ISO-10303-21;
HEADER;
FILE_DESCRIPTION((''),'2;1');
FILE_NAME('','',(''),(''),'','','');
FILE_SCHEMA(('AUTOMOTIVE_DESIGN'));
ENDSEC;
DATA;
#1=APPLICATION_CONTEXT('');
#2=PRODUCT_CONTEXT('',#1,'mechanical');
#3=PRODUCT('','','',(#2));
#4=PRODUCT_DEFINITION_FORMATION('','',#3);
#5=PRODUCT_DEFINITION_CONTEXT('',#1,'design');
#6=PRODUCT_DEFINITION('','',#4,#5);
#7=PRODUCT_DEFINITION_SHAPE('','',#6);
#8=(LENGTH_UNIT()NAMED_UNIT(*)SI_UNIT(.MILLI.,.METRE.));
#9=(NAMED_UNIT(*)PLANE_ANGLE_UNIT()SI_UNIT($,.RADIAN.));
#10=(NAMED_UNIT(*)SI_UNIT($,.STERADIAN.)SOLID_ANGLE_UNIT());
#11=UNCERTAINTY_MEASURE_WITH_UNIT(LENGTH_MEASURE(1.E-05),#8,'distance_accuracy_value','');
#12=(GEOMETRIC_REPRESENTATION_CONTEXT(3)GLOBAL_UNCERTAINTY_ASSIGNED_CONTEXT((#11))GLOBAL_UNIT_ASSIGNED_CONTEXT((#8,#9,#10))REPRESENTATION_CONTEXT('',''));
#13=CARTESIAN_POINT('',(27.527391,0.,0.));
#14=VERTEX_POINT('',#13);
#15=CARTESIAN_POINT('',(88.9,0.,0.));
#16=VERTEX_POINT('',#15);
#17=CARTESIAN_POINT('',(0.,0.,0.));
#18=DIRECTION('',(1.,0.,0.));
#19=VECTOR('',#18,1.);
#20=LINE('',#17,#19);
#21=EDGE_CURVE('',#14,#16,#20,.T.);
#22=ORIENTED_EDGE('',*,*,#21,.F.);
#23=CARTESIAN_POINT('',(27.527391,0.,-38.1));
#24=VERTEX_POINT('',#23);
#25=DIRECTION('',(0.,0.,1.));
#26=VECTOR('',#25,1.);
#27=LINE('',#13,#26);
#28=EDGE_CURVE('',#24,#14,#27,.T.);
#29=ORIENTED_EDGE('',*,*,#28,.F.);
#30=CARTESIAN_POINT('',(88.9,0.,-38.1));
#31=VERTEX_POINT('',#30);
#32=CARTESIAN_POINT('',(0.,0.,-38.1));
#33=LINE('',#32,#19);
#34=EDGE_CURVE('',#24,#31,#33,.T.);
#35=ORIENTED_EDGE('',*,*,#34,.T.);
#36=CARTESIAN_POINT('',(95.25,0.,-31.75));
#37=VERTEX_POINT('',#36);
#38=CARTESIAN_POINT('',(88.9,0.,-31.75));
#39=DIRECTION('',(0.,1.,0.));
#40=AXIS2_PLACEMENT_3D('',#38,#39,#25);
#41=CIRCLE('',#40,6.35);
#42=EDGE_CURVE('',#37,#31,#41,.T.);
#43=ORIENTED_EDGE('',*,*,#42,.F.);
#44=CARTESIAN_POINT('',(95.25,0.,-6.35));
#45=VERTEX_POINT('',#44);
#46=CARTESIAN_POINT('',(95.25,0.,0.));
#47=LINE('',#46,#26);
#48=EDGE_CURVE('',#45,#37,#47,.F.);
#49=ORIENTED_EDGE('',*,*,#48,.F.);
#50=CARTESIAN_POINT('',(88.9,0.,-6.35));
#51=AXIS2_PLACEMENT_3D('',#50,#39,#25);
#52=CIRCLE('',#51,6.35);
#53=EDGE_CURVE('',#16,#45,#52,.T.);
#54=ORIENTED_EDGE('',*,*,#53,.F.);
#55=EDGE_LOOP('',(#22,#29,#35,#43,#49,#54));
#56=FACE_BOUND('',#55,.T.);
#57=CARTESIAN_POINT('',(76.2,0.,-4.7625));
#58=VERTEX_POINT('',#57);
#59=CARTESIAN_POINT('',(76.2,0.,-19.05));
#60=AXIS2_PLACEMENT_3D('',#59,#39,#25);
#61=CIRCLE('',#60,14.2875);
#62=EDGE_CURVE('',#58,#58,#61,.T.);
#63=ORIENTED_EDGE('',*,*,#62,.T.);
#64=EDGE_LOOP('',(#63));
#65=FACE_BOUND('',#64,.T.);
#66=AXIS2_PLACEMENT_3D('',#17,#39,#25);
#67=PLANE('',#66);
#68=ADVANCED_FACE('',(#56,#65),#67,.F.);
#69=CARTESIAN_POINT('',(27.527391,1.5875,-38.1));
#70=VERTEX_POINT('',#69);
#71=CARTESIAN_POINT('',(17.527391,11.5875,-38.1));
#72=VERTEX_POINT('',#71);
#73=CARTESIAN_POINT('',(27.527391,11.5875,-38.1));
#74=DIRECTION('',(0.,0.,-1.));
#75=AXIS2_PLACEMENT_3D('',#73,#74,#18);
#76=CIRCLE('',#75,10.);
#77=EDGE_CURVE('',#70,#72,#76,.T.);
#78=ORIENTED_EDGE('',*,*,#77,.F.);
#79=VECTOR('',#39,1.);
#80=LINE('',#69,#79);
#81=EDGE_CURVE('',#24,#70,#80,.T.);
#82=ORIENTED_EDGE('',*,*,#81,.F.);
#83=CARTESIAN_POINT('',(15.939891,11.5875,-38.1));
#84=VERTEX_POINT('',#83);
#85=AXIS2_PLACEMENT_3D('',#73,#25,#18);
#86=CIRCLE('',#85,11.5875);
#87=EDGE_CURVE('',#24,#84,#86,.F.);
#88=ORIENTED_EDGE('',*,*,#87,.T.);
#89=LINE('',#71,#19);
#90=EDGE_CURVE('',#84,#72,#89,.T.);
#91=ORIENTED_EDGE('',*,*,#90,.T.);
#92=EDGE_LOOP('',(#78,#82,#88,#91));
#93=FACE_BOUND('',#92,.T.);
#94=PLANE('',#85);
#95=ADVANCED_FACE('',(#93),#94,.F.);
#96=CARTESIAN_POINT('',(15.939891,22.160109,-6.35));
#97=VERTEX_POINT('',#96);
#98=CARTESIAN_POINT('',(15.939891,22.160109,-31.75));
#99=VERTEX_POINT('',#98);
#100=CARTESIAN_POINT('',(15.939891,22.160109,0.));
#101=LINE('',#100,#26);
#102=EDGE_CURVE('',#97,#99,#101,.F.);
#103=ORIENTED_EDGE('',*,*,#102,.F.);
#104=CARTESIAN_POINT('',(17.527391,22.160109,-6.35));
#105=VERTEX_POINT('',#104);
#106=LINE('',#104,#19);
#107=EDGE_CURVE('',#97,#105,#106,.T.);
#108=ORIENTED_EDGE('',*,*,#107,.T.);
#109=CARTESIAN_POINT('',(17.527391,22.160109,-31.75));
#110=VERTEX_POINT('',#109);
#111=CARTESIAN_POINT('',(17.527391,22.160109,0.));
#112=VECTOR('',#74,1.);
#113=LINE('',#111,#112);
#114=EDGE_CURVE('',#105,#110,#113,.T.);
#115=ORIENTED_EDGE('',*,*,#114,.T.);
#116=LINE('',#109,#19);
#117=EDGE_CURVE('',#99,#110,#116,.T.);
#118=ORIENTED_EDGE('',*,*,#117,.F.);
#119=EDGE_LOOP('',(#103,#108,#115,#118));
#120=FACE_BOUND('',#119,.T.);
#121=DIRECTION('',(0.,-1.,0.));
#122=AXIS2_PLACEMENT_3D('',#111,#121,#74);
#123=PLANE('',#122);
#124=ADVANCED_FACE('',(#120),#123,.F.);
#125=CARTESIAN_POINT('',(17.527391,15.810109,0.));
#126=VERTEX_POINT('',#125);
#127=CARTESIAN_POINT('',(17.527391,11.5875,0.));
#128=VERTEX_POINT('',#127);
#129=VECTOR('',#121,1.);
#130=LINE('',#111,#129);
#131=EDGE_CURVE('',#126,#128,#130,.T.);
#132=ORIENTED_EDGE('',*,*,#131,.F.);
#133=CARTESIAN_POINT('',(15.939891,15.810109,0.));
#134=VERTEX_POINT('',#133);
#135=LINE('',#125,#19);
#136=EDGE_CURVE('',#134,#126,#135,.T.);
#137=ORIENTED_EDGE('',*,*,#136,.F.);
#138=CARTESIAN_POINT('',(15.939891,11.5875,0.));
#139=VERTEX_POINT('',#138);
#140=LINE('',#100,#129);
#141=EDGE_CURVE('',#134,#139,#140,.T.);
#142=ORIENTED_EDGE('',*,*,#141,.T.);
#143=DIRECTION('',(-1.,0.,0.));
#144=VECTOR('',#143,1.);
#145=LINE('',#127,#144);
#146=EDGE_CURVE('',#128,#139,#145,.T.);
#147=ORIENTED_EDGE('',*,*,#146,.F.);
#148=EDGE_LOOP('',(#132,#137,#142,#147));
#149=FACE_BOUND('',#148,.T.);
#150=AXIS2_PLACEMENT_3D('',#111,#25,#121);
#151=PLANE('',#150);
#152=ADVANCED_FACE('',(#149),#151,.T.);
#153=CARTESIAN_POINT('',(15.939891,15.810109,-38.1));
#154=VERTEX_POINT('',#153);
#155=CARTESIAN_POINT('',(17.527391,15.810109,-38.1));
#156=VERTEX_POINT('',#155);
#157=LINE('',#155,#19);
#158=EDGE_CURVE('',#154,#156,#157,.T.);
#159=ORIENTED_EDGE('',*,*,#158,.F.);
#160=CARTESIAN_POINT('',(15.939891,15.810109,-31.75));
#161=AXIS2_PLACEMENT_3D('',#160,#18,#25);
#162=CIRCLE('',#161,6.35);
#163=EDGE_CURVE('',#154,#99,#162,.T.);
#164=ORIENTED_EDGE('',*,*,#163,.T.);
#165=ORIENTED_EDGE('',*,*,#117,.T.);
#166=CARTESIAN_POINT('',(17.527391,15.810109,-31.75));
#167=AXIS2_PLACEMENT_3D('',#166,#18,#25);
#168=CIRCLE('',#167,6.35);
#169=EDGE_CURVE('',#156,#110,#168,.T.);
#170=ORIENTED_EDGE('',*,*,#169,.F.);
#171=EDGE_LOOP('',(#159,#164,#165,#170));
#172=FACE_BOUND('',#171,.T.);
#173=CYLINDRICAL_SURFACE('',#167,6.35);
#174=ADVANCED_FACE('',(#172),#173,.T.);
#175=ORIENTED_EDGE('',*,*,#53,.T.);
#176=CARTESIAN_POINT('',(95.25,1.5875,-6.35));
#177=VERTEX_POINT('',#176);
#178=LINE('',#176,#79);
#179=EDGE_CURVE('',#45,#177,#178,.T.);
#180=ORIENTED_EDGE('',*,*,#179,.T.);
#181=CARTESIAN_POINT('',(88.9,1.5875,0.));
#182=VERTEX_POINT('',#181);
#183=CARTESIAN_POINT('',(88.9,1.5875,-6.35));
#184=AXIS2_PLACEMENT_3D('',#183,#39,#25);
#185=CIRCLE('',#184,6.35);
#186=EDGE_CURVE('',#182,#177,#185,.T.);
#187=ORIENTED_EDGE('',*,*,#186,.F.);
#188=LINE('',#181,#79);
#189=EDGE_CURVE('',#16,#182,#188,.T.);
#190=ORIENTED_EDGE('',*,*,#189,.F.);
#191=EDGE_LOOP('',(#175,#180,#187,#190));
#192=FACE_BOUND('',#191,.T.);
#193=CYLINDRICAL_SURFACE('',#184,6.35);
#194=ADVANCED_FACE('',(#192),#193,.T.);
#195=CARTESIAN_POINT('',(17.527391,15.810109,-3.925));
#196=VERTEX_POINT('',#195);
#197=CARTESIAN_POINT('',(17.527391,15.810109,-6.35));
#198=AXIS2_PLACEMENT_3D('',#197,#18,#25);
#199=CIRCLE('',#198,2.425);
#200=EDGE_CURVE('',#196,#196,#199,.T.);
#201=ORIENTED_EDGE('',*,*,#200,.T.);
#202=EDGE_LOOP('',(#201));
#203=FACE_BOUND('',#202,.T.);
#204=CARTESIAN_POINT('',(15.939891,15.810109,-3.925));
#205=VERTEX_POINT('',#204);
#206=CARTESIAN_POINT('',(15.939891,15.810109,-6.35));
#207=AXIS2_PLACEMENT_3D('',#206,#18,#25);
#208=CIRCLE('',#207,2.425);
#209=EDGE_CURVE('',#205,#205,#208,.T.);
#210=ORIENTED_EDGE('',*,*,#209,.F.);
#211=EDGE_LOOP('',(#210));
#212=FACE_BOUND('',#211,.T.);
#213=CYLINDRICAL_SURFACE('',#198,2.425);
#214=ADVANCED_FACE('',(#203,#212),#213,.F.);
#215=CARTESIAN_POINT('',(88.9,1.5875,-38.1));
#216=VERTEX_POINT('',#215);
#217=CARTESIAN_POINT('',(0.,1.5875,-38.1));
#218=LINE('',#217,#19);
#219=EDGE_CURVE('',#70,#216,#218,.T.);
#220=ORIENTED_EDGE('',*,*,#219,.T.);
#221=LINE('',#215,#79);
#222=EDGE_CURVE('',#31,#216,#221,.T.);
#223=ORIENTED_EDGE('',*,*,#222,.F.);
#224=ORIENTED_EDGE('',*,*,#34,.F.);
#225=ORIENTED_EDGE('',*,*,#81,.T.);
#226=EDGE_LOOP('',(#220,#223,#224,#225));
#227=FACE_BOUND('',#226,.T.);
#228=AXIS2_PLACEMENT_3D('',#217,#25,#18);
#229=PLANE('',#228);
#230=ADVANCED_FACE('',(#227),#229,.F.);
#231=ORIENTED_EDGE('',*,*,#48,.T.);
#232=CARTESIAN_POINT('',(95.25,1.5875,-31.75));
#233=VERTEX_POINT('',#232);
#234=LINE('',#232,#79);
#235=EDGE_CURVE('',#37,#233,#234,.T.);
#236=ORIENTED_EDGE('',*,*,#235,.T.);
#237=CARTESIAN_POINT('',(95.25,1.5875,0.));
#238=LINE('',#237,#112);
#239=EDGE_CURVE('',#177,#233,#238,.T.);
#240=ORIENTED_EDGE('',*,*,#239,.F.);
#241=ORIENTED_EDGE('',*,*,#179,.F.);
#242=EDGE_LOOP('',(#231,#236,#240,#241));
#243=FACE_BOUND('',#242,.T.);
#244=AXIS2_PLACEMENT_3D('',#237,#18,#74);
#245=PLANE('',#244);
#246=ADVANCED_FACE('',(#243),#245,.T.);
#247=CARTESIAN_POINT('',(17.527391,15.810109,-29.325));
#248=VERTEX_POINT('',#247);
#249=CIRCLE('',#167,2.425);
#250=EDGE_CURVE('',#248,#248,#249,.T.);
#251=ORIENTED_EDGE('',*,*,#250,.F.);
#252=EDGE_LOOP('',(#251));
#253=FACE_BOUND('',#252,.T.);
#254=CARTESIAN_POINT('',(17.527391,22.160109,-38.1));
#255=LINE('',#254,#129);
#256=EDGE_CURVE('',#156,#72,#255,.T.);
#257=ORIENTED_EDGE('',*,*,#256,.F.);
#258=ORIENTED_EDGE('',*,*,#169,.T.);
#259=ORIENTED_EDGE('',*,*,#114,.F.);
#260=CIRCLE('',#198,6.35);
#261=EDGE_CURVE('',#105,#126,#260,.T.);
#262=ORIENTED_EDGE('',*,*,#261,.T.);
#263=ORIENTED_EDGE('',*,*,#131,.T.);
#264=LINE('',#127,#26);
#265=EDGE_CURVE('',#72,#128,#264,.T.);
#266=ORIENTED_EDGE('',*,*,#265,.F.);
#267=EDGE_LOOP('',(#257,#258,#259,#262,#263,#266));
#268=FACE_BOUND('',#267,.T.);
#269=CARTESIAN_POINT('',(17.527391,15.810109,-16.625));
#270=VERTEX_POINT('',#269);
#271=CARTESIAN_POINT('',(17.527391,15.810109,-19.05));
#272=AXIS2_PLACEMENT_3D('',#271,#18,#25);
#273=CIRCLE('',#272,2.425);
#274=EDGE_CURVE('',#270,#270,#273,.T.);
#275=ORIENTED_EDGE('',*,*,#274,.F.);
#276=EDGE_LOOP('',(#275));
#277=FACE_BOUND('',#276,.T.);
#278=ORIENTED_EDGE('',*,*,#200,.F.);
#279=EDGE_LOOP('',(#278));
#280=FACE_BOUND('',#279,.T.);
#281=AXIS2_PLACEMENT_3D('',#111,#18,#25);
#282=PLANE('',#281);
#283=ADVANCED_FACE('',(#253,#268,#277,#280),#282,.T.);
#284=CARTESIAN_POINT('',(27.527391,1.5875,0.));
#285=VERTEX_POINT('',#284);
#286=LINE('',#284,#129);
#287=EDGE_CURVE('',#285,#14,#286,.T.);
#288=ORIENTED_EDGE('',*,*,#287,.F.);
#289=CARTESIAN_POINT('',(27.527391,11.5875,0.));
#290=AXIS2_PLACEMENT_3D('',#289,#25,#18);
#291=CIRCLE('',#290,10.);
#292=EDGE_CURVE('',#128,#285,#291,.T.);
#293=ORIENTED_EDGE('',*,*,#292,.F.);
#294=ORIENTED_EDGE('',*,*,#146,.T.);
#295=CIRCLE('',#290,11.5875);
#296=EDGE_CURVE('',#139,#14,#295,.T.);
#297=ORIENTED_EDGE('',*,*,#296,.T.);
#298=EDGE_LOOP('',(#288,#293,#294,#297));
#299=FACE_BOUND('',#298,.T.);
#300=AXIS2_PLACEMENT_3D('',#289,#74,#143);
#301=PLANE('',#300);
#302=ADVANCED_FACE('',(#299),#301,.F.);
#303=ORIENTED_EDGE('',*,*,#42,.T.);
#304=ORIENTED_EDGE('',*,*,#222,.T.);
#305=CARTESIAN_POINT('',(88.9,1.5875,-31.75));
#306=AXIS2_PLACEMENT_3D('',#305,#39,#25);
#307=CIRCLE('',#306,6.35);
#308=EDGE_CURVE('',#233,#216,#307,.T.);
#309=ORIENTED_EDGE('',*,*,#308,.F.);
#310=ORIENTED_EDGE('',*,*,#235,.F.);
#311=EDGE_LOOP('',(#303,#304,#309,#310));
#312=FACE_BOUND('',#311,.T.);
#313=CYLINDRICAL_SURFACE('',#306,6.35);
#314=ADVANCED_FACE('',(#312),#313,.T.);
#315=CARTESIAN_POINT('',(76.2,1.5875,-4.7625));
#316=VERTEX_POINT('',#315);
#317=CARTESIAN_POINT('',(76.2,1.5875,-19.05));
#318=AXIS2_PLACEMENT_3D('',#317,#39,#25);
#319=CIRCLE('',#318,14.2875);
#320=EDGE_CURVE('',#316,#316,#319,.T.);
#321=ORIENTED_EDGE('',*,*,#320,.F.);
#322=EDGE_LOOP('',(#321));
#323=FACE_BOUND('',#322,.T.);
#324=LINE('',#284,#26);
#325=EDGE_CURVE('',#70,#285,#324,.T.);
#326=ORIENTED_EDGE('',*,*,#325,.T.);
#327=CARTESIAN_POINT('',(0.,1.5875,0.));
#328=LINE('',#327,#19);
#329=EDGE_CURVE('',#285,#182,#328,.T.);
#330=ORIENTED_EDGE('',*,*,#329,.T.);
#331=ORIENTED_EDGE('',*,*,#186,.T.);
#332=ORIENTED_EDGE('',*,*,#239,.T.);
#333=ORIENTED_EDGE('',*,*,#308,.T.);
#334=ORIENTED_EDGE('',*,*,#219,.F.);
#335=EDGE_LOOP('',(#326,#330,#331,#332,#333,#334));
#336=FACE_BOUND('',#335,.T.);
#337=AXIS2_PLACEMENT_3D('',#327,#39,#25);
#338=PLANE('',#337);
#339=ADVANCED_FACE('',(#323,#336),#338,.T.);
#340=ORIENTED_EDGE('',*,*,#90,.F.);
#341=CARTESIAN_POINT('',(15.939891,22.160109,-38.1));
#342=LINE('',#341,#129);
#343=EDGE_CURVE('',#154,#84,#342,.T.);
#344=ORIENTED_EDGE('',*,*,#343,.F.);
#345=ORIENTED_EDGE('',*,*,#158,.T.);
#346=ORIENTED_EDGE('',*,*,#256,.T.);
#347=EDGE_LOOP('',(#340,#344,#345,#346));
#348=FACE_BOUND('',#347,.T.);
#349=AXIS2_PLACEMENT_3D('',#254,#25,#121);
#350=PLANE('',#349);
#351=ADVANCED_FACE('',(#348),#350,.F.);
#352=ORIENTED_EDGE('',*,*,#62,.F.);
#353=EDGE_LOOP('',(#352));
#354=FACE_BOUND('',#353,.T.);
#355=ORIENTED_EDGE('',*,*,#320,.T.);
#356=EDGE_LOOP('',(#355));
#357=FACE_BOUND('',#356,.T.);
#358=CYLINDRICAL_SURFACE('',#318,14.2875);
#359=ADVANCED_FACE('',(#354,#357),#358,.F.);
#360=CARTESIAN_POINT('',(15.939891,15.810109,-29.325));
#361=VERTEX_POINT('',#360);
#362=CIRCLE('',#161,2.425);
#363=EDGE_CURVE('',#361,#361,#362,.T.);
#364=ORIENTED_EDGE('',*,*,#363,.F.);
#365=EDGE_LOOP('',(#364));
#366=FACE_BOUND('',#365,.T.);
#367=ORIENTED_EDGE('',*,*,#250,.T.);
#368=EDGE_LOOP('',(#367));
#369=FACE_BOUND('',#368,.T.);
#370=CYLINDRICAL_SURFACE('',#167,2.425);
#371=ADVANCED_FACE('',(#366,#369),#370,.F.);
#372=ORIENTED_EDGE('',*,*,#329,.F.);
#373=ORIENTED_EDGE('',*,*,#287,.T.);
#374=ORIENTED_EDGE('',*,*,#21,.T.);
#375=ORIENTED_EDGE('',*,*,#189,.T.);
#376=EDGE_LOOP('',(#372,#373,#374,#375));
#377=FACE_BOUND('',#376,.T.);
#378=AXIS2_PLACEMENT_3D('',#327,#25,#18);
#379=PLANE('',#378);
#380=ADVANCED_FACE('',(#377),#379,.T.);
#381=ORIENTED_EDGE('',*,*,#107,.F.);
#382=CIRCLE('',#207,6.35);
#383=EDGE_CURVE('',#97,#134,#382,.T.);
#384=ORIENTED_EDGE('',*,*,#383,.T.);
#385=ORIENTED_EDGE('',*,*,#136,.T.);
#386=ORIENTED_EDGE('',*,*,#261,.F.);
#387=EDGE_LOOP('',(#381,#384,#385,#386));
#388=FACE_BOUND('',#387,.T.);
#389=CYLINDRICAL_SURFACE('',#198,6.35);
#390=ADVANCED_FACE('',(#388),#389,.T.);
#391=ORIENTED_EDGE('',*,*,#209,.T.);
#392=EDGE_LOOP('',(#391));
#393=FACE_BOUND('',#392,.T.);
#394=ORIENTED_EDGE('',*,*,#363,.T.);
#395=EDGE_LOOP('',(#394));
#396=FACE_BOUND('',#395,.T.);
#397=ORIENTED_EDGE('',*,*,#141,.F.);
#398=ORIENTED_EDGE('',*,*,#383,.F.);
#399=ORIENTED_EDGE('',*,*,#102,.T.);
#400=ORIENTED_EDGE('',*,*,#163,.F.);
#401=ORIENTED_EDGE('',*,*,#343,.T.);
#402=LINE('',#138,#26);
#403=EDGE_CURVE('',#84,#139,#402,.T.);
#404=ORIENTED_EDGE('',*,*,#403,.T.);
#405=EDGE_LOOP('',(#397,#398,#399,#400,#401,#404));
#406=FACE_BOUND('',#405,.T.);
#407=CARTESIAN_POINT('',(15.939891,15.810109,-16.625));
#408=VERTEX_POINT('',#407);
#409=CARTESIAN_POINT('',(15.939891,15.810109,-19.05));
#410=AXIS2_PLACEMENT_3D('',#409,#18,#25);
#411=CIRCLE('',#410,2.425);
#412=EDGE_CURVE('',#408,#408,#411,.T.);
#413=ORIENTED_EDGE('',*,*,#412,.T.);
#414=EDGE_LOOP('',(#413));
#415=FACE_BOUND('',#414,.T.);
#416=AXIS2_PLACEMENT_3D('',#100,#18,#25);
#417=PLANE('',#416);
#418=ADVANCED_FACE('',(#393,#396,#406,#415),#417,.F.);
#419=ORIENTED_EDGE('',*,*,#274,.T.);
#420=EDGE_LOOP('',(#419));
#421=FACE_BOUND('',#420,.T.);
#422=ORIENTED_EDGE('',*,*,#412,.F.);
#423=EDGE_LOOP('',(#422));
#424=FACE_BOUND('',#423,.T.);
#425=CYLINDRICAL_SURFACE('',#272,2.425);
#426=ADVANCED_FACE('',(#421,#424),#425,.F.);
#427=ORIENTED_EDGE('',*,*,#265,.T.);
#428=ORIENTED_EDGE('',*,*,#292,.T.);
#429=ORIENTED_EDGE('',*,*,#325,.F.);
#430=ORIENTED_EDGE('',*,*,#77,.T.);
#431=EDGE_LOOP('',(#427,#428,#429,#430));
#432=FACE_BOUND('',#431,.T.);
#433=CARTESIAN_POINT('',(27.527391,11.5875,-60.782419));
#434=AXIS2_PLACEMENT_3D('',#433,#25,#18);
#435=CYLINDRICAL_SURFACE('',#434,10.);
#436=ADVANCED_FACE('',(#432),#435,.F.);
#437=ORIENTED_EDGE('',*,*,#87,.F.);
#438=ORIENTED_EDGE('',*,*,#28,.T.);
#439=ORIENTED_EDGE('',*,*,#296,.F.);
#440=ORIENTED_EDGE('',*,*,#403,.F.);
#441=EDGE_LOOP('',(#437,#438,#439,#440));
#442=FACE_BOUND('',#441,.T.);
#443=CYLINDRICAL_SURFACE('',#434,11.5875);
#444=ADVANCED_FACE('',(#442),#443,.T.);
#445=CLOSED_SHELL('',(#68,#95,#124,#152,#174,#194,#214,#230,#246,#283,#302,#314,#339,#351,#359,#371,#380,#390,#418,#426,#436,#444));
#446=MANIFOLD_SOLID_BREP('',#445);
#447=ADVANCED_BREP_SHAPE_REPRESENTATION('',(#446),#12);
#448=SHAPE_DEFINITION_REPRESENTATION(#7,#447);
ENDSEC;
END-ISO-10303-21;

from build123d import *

# Parameters (mm, degrees)
SKETCH1_W                  = 19.05
SKETCH1_H                  = 38.1
SKETCH1_R                  = 2.425
SKETCH1_R_2                = 14.2875
BOSS_EXTRUDE2_DEPTH        = 1.5875
FILLET2_R                  = 6.35
SKETCHED_BEND2_OUTLINE_W   = 1.5875
SKETCHED_BEND2_OUTLINE_H   = 38.1
SKETCHED_BEND2_DEPTH       = 17.527391426
SKETCHED_START             = 15.939891426
SKETCHED_BEND2_2_OUTLINE_R = 2.425
SKETCHED_BEND2_2_DEPTH     = 11.5875
SKETCHED_START_2           = -38.1
SKETCHED_BEND2_3_DEPTH     = 38.1


with BuildPart() as part:
    # Sketch1 → Boss-Extrude2 (new body)
    # profile 1 of 3: a face of its own
    with BuildSketch(Plane(origin=(0, 0, 0), x_dir=(1, 0, 0), z_dir=(0, 1, 0))):
        with Locations((9.525, 19.05)):
            Rectangle(SKETCH1_W, SKETCH1_H)
        with Locations(Location((6.35, 6.35, 0), (0, 0, 270))):
            Circle(SKETCH1_R, mode=Mode.SUBTRACT)
        with Locations(Location((6.35, 19.05, 0), (0, 0, 270))):
            Circle(SKETCH1_R, mode=Mode.SUBTRACT)
        with Locations(Location((6.35, 31.75, 0), (0, 0, 270))):
            Circle(SKETCH1_R, mode=Mode.SUBTRACT)
    # profile 2 of 3: a face of its own
    with BuildSketch(Plane(origin=(0, 0, 0), x_dir=(1, 0, 0), z_dir=(0, 1, 0))):
        Polygon((19.05, 38.1), (19.05, 0), (50.8, 0), (95.25, 0), (95.25, 38.1), (50.8, 38.1), align=None)
        with Locations(Location((76.2, 19.05, 0), (0, 0, 270))):
            Circle(SKETCH1_R_2, mode=Mode.SUBTRACT)
    # profile 3 of 3: a face of its own
    with BuildSketch(Plane(origin=(0, 0, 0), x_dir=(1, 0, 0), z_dir=(0, 1, 0))):
        Polygon((19.05, 38.1), (19.05, 0), (50.8, 0), (95.25, 0), (95.25, 38.1), (50.8, 38.1), align=None)
        with Locations(Location((76.2, 19.05, 0), (0, 0, 270))):
            Circle(SKETCH1_R_2, mode=Mode.SUBTRACT)
    extrude(amount=BOSS_EXTRUDE2_DEPTH)

    # Fillet2
    fillet2_edges = [part.edges().sort_by_distance(p)[0] for p in [
        (0, 0.79375, 0),
        (0, 0.79375, -38.1),
        (95.25, 0.79375, -38.1),
        (95.25, 0.79375, 0),
    ]]
    fillet(fillet2_edges, radius=FILLET2_R)

    # Sketched Bend2: read off the stored shape, not the designer's step
    # Sketched Bend2 outline → Sketched Bend2 (cut)
    with BuildSketch(Plane.YZ):
        with Locations((0.79375, -19.05)):
            Rectangle(SKETCHED_BEND2_OUTLINE_W, SKETCHED_BEND2_OUTLINE_H)
    extrude(amount=SKETCHED_BEND2_DEPTH, mode=Mode.SUBTRACT)

    # Sketched Bend2 2 outline → Sketched Bend2 2 (add)
    with BuildSketch(Plane.YZ.offset(SKETCHED_START)):
        with BuildLine():
            Line((1.5875, -38.1), (15.810108574, -38.1))
            ThreePointArc((15.810108574, -38.1), (20.300236634, -36.240128061), (22.160108574, -31.75))
            Line((22.160108574, -31.75), (22.160108574, -6.35))
            ThreePointArc((22.160108574, -6.35), (20.300236634, -1.859871939), (15.810108574, 0))
            Line((15.810108574, 0), (1.5875, 0))
            Line((1.5875, 0), (1.5875, -38.1))
        make_face()
        with Locations((15.810108574, -31.75)):
            Circle(SKETCHED_BEND2_2_OUTLINE_R, mode=Mode.SUBTRACT)
        with Locations((15.810108574, -19.05)):
            Circle(SKETCHED_BEND2_2_OUTLINE_R, mode=Mode.SUBTRACT)
        with Locations((15.810108574, -6.35)):
            Circle(SKETCHED_BEND2_2_OUTLINE_R, mode=Mode.SUBTRACT)
    extrude(amount=SKETCHED_BEND2_2_DEPTH)

    # Sketched Bend2 3 outline → Sketched Bend2 3 (cut)
    with BuildSketch(Plane.XY.offset(SKETCHED_START_2)):
        with BuildLine():
            ThreePointArc((27.527391426, 0), (19.333791599, 3.393900173), (15.939891426, 11.5875))
            Line((15.939891426, 11.5875), (15.939891426, 1.5875))
            Line((15.939891426, 1.5875), (17.527391426, 1.5875))
            Line((17.527391426, 1.5875), (17.527391426, 0))
            Line((17.527391426, 0), (27.527391426, 0))
        make_face()
        with BuildLine():
            Line((17.527391426, 22.160108574), (17.527391426, 11.5875))
            ThreePointArc((17.527391426, 11.5875), (20.456323614, 4.516432188), (27.527391426, 1.5875))
            Line((27.527391426, 1.5875), (27.527391426, 22.160108574))
            Line((27.527391426, 22.160108574), (17.527391426, 22.160108574))
        make_face()
    extrude(amount=SKETCHED_BEND2_3_DEPTH, mode=Mode.SUBTRACT)


solid = part.part
